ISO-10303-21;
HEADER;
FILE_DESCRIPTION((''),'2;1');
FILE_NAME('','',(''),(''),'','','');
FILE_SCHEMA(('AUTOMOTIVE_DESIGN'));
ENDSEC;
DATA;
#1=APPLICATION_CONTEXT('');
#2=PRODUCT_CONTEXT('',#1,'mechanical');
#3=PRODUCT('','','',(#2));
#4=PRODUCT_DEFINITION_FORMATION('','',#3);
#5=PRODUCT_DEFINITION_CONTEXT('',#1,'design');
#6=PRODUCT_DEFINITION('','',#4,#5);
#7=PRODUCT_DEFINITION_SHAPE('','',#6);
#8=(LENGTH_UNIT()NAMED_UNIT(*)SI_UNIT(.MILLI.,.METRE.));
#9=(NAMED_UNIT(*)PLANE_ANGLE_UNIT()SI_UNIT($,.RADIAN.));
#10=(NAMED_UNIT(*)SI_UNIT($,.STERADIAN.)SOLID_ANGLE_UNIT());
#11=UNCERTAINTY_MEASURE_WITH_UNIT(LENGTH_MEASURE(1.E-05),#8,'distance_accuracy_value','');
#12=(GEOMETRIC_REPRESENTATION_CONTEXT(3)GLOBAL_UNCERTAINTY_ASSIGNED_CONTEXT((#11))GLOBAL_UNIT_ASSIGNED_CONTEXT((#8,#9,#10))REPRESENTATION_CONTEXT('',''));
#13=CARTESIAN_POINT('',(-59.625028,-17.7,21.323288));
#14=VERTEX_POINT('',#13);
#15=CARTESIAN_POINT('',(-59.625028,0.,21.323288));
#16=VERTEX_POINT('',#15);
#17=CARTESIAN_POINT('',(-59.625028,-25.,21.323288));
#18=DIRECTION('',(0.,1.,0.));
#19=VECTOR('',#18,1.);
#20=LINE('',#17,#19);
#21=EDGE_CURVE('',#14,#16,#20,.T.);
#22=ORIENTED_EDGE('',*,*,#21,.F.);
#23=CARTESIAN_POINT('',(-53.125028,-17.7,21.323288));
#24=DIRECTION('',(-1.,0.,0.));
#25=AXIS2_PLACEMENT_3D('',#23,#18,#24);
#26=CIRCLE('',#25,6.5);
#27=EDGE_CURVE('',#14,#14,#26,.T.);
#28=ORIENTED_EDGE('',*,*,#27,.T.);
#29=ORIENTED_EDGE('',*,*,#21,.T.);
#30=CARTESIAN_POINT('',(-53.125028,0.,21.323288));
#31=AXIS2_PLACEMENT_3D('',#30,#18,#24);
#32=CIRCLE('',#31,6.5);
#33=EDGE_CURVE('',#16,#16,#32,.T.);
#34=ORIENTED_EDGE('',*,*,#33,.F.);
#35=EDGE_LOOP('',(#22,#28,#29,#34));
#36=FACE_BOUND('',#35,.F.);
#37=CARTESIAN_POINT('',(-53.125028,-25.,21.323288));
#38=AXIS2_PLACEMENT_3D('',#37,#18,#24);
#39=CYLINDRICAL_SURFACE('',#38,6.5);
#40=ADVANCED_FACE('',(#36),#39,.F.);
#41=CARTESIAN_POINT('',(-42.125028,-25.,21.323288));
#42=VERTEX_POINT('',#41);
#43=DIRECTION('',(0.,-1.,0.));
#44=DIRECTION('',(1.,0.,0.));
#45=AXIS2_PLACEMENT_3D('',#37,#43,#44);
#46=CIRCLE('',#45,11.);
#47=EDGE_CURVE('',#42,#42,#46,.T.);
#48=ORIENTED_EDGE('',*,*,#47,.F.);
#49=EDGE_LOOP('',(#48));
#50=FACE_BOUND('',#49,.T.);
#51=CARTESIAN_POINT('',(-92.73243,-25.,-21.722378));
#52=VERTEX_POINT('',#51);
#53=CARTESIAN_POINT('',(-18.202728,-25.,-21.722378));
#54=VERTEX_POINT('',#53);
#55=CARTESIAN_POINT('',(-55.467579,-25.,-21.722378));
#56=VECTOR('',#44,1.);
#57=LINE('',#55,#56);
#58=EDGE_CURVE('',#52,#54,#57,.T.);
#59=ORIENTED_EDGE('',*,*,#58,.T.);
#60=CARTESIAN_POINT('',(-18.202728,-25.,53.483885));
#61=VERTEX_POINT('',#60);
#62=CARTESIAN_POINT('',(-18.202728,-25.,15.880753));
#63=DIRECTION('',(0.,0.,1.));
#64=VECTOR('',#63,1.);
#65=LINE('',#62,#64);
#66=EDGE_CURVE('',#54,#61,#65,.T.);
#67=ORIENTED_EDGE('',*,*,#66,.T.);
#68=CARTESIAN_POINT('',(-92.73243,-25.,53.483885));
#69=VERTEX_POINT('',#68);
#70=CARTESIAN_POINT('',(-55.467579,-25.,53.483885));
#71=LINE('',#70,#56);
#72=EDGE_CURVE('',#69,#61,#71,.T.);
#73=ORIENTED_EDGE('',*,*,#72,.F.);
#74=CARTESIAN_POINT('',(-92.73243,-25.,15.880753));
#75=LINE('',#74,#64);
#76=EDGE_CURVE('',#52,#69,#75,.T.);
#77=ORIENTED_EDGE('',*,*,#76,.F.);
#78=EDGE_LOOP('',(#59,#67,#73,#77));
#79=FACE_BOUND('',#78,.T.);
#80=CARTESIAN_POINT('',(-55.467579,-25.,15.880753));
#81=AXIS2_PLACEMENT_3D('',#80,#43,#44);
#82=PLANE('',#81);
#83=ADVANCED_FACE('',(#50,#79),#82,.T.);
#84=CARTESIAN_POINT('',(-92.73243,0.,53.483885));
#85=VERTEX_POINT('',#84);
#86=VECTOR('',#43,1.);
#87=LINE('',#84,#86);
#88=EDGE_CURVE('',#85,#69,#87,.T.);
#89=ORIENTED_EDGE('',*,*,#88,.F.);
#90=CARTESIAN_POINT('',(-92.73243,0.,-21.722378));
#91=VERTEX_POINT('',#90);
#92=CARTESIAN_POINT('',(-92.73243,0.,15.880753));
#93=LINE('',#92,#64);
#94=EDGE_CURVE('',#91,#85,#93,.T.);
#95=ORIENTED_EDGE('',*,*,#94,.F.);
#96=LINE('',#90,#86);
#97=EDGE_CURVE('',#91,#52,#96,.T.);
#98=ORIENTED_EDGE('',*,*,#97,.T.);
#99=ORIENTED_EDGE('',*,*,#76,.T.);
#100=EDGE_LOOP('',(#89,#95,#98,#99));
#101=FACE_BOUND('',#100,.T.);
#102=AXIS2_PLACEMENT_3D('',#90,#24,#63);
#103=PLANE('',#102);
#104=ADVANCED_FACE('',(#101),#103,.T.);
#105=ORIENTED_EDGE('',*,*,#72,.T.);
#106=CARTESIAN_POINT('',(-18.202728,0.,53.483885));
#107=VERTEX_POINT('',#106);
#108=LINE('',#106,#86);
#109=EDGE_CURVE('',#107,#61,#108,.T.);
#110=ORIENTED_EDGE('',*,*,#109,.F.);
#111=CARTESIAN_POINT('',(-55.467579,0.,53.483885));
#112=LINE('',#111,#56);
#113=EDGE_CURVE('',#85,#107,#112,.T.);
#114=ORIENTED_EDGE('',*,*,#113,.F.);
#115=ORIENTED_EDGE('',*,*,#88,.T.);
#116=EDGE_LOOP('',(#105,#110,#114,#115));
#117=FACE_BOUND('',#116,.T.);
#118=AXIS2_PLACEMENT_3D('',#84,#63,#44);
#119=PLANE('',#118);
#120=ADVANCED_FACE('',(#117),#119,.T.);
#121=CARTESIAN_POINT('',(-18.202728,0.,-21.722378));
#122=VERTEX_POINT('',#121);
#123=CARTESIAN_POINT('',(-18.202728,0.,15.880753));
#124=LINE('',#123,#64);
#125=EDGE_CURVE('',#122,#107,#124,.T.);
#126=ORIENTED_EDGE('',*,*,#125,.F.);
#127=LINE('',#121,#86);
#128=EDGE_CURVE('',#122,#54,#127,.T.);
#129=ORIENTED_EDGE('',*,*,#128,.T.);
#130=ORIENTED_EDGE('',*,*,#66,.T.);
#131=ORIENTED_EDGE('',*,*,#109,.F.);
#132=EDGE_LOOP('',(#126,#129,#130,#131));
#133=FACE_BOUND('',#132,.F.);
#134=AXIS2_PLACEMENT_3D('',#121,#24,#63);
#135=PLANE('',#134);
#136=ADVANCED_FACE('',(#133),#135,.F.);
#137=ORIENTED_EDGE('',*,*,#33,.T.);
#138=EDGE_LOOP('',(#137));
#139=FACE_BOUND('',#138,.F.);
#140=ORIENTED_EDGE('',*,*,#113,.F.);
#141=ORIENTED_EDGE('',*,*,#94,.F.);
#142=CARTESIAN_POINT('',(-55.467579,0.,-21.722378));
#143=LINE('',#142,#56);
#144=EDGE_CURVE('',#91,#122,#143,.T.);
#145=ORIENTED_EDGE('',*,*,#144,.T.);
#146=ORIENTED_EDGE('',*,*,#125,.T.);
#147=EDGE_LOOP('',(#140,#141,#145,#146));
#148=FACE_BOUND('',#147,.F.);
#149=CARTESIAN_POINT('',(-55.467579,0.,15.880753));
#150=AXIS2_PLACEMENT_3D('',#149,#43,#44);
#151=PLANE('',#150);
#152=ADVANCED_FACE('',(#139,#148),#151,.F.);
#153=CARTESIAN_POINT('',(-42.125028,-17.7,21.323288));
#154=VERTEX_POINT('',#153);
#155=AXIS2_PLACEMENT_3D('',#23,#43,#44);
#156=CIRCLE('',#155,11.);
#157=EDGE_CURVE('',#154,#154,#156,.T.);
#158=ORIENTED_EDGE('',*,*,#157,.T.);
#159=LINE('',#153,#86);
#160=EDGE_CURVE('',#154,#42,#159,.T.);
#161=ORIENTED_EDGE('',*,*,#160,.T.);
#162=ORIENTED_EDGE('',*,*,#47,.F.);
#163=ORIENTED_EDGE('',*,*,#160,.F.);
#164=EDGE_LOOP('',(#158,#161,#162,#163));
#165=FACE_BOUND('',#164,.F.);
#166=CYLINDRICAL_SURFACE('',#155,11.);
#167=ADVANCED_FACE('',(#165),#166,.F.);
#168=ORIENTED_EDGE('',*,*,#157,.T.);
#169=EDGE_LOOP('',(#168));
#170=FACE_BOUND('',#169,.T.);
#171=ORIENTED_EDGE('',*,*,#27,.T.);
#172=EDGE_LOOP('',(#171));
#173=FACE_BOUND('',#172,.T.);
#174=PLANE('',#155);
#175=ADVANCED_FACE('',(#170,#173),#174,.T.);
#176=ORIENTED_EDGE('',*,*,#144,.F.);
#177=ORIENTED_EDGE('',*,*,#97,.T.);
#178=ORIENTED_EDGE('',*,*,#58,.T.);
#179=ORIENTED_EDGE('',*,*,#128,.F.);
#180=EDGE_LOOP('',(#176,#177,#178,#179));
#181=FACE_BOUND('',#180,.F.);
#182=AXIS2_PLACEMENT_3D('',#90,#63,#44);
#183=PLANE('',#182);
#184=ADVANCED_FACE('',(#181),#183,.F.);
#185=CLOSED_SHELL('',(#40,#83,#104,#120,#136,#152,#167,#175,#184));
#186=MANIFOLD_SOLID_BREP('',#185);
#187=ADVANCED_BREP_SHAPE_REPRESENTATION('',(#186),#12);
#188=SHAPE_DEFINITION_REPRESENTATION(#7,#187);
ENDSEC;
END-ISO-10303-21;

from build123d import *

# Parameters (mm, degrees)
F0_W           = 74.5297018439
F0_H           = 75.2062629908
F1_DEPTH       = 25
F6_D           = 13
F6_DEPTH       = 50
F6_CBORE_D     = 22
F6_CBORE_DEPTH = 7.3
F6_TIP         = 3.9055940237


# Not quite as in the source:
# - the program builds the solid bodies; features that only make, move or delete a surface that nothing else refers to are left out


with BuildPart() as f1:
    # F0 (on Front) → F1 (new body)
    with BuildSketch(Plane.XZ):
        with Locations((-55.4675785825, 15.8807532862)):
            Rectangle(F0_W, F0_H)
    extrude(amount=F1_DEPTH)

    # F6
    with Locations(Plane.XZ.offset(25)):
        with Locations((-53.1250275671, 21.3232878596)):
            CounterBoreHole(F6_D / 2, F6_CBORE_D / 2, F6_CBORE_DEPTH, depth=F6_DEPTH)
            with Locations((0, 0, -(F6_DEPTH + F6_TIP / 2))):  # 118° drill point
                Cone(0, F6_D / 2, F6_TIP, mode=Mode.SUBTRACT)


solid = f1.part
